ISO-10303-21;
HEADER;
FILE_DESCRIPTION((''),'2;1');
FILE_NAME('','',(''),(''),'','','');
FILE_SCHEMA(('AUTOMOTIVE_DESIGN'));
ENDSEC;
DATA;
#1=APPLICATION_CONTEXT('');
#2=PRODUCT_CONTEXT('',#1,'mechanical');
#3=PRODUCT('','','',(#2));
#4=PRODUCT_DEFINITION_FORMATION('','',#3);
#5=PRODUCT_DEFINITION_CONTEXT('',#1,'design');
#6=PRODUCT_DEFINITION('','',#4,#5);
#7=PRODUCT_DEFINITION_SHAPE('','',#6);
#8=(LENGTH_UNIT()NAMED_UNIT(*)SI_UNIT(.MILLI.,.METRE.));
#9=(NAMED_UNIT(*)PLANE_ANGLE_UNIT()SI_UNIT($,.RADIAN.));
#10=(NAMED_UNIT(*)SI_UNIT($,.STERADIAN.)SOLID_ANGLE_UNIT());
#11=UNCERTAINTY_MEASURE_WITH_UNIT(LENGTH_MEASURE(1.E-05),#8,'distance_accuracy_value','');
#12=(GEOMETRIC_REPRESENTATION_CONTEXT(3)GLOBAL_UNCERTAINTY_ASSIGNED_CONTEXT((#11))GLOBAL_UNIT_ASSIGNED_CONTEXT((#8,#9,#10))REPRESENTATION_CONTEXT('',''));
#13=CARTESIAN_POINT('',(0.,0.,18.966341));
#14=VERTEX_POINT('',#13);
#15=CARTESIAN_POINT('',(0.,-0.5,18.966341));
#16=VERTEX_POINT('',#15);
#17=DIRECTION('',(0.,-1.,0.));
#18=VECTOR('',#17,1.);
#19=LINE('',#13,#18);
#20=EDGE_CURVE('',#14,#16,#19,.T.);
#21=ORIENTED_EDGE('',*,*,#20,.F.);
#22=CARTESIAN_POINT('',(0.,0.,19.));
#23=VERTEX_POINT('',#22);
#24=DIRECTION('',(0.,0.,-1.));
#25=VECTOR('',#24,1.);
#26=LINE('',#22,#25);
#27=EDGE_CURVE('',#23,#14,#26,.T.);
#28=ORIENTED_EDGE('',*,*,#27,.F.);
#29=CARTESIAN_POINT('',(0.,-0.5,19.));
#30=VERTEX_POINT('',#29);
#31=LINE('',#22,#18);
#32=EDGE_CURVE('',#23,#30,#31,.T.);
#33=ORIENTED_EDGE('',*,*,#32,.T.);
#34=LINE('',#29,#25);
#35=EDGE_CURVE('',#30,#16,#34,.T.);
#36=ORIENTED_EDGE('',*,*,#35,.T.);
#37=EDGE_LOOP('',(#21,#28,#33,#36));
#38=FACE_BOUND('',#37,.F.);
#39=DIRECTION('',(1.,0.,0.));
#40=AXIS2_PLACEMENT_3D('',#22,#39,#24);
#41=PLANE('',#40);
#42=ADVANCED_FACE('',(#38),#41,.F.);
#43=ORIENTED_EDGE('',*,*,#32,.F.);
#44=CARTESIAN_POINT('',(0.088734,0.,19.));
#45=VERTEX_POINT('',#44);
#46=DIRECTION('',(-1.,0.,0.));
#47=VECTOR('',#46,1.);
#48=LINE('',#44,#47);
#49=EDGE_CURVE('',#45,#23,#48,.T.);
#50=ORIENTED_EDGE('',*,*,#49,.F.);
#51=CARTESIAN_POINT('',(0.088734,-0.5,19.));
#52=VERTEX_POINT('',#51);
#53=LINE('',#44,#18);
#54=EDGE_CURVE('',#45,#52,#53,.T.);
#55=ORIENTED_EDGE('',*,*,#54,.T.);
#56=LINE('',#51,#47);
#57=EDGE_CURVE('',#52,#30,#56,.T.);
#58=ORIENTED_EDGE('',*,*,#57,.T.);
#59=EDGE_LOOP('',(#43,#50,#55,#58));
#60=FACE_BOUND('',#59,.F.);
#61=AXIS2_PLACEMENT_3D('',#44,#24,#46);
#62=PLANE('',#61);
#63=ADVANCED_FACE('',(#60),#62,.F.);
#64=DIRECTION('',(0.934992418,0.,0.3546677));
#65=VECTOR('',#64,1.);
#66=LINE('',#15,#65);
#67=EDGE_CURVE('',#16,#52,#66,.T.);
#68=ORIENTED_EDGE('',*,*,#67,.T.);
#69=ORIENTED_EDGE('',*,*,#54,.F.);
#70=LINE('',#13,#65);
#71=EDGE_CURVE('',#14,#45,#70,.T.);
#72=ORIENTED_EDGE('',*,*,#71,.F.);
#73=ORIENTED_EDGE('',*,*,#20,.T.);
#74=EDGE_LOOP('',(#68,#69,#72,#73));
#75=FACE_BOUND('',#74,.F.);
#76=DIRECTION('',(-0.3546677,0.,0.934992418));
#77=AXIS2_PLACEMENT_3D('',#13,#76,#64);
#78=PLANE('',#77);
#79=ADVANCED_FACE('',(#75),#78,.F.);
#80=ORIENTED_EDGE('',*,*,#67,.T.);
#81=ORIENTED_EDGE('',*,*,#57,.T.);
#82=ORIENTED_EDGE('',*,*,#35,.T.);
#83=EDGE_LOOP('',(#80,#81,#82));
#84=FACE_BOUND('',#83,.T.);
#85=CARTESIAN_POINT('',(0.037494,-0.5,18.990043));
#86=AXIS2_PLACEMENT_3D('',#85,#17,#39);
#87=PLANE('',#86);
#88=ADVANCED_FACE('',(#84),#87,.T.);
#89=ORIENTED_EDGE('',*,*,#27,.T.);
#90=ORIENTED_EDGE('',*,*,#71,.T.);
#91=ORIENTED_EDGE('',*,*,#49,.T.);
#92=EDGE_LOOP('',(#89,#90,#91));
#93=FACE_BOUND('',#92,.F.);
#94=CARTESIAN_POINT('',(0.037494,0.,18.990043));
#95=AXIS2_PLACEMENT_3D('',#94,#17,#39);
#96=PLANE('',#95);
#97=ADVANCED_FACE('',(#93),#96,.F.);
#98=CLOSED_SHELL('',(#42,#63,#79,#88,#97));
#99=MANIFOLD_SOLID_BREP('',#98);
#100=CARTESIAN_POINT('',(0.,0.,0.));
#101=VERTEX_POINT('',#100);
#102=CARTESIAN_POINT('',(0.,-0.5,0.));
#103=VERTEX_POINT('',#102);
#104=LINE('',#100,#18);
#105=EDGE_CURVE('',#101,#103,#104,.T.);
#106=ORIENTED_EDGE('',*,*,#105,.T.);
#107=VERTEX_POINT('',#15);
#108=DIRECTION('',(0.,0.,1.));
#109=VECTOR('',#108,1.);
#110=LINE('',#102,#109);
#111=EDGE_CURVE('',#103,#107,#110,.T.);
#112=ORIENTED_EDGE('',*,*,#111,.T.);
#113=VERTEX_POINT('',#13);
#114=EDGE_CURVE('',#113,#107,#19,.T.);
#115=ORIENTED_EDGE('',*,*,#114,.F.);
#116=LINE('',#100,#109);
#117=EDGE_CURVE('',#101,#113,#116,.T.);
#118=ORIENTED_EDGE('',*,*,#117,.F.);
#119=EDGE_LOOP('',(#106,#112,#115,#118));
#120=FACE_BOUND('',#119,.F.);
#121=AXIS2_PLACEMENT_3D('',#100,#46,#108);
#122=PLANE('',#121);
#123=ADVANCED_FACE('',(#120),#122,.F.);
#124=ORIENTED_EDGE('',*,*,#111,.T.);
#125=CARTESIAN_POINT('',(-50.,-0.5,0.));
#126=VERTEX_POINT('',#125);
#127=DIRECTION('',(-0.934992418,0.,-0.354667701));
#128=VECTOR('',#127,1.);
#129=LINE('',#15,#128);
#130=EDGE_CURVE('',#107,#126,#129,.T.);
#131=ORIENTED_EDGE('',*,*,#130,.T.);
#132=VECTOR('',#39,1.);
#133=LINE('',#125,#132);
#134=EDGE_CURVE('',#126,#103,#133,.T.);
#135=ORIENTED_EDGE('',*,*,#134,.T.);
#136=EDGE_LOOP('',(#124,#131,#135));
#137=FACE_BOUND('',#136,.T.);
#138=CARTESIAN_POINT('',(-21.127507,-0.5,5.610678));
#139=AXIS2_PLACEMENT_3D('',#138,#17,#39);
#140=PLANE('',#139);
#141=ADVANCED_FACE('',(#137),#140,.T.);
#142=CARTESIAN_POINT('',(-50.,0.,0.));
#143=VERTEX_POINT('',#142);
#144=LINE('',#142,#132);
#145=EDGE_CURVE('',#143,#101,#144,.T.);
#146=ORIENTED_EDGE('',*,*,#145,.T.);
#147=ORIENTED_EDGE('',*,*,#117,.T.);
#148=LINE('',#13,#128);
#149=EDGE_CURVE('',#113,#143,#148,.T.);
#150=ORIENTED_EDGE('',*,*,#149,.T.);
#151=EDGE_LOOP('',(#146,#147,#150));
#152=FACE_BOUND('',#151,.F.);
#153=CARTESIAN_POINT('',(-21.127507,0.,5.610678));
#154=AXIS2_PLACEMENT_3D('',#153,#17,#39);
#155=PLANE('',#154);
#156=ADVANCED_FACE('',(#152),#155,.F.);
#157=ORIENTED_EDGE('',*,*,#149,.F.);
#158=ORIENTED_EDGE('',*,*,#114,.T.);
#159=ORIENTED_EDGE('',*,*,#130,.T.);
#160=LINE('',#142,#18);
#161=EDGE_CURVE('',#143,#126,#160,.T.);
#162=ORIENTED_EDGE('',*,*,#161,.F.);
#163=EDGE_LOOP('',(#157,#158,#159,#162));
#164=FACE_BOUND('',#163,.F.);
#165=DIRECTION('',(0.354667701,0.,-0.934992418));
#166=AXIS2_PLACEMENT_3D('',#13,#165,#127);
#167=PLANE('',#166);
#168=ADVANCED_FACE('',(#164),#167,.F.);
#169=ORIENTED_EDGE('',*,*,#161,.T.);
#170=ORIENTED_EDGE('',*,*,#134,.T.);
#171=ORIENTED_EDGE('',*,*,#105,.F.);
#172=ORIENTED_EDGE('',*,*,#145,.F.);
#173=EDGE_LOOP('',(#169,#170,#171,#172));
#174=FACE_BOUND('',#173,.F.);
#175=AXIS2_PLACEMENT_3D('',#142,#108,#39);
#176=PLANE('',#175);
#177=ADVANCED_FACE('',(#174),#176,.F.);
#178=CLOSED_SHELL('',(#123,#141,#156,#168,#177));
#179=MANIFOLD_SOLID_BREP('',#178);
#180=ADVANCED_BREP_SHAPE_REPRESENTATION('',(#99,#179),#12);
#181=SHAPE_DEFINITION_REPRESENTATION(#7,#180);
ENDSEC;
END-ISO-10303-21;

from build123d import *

# Parameters (mm, degrees)
F1_DEPTH = 0.5


# Not quite as in the source:
# - a feature names something its author has since deleted; it is built from what else it names


with BuildPart() as f1:
    # F0 (on Front) → F1 (new body)
    with BuildSketch(Plane.XZ):
        Polygon((0, 18.9663409947), (-50, 0), (0, 0), align=None)
    extrude(amount=F1_DEPTH)


with BuildPart() as f1b:
    # F0 (on Front) → F1, piece 2 (new body)
    with BuildSketch(Plane.XZ):
        Polygon((0, 19), (0, 18.9663409947), (0.0887335236, 19), align=None)
    extrude(amount=F1_DEPTH)


solid = Compound([f1.part, f1b.part])
